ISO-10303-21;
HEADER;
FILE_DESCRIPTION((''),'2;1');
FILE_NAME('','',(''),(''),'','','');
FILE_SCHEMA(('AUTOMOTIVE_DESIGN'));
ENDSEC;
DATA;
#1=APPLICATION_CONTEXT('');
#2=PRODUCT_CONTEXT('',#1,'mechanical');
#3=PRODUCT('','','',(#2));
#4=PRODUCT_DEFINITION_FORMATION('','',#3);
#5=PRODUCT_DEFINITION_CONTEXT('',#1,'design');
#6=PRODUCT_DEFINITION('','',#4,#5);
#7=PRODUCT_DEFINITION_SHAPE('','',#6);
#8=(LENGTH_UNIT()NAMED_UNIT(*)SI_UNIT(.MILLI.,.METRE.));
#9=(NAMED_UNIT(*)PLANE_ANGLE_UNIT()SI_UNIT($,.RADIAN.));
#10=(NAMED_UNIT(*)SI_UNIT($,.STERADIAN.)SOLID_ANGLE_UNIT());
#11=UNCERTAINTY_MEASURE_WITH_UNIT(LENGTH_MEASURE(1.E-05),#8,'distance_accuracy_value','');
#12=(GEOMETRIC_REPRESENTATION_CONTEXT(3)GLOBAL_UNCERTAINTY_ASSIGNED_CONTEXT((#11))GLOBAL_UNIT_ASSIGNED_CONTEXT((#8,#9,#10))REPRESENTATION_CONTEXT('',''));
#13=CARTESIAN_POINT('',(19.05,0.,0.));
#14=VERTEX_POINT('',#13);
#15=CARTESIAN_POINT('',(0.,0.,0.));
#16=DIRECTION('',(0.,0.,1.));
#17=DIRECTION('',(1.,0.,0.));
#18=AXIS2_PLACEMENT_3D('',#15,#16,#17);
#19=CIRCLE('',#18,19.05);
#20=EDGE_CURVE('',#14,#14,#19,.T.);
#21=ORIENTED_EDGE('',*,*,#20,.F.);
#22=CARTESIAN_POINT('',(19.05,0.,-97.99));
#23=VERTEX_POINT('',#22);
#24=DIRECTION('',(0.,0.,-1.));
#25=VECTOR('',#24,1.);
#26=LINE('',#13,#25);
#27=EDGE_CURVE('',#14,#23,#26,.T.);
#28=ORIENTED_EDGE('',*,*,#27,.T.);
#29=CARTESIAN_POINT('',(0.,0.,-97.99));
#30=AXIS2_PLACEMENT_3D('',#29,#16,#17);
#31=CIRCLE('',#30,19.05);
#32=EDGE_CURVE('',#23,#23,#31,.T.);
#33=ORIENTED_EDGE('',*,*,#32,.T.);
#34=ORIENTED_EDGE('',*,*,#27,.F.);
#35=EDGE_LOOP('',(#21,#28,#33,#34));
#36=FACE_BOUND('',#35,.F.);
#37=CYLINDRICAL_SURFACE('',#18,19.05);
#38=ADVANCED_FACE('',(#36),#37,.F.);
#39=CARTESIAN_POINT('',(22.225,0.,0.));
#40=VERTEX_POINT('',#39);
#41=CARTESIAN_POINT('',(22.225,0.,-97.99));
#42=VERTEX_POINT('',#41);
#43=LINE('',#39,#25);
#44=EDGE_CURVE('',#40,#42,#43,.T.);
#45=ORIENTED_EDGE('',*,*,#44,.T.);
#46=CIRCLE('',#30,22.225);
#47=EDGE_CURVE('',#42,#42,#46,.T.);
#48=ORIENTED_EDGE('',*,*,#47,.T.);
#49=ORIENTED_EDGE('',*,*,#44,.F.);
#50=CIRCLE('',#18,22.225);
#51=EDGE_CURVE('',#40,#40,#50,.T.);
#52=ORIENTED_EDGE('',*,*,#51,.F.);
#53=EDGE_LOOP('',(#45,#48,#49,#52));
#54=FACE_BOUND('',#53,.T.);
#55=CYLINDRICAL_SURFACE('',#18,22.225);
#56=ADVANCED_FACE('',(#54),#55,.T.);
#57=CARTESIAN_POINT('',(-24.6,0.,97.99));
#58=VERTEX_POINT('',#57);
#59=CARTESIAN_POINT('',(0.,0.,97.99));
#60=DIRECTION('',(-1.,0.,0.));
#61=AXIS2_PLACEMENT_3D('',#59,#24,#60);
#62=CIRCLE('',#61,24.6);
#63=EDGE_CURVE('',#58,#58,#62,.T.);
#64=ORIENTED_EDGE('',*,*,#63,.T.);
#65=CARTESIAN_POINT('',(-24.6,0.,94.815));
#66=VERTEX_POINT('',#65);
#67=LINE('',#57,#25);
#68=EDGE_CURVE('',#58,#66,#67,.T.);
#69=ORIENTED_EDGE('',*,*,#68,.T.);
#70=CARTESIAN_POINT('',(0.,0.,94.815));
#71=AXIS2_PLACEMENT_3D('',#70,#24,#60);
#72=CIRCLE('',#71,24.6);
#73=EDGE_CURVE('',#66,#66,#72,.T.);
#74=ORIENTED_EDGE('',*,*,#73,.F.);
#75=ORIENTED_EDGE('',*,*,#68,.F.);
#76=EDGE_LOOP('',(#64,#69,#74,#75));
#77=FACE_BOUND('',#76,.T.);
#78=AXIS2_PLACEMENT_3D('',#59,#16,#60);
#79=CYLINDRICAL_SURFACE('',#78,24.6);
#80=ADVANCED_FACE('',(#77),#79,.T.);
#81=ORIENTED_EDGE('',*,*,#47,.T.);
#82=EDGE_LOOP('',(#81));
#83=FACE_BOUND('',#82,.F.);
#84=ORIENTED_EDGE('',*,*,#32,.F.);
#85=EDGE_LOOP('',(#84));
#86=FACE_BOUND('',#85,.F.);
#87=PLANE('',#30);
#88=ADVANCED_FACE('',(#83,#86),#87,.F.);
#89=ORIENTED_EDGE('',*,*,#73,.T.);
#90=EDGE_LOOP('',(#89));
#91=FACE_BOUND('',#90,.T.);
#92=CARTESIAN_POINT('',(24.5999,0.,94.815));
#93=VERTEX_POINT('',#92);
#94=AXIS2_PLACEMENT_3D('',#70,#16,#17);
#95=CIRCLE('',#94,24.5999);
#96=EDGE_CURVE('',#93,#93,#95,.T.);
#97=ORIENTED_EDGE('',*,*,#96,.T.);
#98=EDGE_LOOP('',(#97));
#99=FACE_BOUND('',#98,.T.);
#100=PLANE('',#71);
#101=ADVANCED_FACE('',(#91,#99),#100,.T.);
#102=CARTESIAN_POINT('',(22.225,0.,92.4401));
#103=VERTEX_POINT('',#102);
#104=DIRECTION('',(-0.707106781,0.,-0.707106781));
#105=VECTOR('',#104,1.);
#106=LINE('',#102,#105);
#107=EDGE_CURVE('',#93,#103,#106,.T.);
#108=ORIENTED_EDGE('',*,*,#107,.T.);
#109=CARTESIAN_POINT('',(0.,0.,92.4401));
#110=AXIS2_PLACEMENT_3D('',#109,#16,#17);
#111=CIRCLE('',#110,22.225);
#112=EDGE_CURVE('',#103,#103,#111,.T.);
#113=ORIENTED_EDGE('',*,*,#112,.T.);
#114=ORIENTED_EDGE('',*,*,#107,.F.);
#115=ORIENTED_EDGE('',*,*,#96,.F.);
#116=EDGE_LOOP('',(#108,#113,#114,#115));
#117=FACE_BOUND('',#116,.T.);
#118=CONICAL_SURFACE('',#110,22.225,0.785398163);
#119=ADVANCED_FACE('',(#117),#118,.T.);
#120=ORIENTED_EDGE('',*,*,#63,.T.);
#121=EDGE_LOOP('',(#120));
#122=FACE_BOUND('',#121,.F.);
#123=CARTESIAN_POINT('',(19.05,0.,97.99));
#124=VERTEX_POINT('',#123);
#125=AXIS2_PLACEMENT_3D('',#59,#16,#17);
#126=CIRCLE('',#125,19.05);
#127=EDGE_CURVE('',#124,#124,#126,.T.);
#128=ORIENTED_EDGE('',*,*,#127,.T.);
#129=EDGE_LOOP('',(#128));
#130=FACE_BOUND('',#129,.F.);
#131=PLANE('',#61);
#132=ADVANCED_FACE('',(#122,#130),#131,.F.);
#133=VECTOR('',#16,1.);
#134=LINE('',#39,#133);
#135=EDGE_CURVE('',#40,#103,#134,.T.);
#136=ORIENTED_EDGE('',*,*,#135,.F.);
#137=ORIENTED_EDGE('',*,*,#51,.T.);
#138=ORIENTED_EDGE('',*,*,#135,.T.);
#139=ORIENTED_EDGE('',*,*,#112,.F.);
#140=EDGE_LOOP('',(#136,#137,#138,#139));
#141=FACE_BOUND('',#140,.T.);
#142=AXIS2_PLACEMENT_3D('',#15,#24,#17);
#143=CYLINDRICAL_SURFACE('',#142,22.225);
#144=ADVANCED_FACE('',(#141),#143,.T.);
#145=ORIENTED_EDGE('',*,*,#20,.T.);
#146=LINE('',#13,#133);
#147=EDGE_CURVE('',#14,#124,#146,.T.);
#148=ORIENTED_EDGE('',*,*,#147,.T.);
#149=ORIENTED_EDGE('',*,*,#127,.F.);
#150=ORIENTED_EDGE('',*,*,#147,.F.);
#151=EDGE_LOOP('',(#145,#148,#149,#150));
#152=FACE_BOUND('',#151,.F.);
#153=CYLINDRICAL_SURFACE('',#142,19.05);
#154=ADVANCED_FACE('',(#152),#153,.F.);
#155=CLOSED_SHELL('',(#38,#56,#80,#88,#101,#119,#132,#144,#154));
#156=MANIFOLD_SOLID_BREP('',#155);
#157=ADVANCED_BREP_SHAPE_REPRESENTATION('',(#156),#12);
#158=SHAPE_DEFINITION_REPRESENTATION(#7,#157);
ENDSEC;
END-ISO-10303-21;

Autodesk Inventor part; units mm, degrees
ref_plane "YZ Plane" through (0, 0, 0) normal (1, 0, 0) x (0, 1, 0)
ref_plane "XZ Plane" through (0, 0, 0) normal (0, 1, 0) x (-1, 0, 0)
ref_plane "XY Plane" through (0, 0, 0) normal (0, 0, 1) x (1, 0, 0)
sketch "Sketch2" plane through (0, 0, 0) normal (0, 0, 1) x (1, 0, 0)
  circle A0 centre (0, 0) radius 19.05
  circle A1 centre (0, 0) radius 22.225
  dimension "d0" = 38.1
  dimension "d1" = 3.175
extrude "Extrusion1" add sketch "Sketch2" along normal mid plane 195.98
sketch "Sketch3" plane through (0, 0, 97.99) normal (0, 0, -1) x (-1, 0, 0)
  circle A0 centre (0, 0) radius 22.225 projected
  circle A1 centre (0, 0) radius 24.6
  dimension "d4" = 49.2
  dimension "d7" = 2.375
extrude "Extrusion2" add sketch "Sketch3" along normal blind 3.175
chamfer "Chamfer2" distance 2.3749 angle 45 1 edges at (-22.225, 0, 94.815)
properties part number "TUBE,1.5IN,ARM" material "Aluminum 7075"
